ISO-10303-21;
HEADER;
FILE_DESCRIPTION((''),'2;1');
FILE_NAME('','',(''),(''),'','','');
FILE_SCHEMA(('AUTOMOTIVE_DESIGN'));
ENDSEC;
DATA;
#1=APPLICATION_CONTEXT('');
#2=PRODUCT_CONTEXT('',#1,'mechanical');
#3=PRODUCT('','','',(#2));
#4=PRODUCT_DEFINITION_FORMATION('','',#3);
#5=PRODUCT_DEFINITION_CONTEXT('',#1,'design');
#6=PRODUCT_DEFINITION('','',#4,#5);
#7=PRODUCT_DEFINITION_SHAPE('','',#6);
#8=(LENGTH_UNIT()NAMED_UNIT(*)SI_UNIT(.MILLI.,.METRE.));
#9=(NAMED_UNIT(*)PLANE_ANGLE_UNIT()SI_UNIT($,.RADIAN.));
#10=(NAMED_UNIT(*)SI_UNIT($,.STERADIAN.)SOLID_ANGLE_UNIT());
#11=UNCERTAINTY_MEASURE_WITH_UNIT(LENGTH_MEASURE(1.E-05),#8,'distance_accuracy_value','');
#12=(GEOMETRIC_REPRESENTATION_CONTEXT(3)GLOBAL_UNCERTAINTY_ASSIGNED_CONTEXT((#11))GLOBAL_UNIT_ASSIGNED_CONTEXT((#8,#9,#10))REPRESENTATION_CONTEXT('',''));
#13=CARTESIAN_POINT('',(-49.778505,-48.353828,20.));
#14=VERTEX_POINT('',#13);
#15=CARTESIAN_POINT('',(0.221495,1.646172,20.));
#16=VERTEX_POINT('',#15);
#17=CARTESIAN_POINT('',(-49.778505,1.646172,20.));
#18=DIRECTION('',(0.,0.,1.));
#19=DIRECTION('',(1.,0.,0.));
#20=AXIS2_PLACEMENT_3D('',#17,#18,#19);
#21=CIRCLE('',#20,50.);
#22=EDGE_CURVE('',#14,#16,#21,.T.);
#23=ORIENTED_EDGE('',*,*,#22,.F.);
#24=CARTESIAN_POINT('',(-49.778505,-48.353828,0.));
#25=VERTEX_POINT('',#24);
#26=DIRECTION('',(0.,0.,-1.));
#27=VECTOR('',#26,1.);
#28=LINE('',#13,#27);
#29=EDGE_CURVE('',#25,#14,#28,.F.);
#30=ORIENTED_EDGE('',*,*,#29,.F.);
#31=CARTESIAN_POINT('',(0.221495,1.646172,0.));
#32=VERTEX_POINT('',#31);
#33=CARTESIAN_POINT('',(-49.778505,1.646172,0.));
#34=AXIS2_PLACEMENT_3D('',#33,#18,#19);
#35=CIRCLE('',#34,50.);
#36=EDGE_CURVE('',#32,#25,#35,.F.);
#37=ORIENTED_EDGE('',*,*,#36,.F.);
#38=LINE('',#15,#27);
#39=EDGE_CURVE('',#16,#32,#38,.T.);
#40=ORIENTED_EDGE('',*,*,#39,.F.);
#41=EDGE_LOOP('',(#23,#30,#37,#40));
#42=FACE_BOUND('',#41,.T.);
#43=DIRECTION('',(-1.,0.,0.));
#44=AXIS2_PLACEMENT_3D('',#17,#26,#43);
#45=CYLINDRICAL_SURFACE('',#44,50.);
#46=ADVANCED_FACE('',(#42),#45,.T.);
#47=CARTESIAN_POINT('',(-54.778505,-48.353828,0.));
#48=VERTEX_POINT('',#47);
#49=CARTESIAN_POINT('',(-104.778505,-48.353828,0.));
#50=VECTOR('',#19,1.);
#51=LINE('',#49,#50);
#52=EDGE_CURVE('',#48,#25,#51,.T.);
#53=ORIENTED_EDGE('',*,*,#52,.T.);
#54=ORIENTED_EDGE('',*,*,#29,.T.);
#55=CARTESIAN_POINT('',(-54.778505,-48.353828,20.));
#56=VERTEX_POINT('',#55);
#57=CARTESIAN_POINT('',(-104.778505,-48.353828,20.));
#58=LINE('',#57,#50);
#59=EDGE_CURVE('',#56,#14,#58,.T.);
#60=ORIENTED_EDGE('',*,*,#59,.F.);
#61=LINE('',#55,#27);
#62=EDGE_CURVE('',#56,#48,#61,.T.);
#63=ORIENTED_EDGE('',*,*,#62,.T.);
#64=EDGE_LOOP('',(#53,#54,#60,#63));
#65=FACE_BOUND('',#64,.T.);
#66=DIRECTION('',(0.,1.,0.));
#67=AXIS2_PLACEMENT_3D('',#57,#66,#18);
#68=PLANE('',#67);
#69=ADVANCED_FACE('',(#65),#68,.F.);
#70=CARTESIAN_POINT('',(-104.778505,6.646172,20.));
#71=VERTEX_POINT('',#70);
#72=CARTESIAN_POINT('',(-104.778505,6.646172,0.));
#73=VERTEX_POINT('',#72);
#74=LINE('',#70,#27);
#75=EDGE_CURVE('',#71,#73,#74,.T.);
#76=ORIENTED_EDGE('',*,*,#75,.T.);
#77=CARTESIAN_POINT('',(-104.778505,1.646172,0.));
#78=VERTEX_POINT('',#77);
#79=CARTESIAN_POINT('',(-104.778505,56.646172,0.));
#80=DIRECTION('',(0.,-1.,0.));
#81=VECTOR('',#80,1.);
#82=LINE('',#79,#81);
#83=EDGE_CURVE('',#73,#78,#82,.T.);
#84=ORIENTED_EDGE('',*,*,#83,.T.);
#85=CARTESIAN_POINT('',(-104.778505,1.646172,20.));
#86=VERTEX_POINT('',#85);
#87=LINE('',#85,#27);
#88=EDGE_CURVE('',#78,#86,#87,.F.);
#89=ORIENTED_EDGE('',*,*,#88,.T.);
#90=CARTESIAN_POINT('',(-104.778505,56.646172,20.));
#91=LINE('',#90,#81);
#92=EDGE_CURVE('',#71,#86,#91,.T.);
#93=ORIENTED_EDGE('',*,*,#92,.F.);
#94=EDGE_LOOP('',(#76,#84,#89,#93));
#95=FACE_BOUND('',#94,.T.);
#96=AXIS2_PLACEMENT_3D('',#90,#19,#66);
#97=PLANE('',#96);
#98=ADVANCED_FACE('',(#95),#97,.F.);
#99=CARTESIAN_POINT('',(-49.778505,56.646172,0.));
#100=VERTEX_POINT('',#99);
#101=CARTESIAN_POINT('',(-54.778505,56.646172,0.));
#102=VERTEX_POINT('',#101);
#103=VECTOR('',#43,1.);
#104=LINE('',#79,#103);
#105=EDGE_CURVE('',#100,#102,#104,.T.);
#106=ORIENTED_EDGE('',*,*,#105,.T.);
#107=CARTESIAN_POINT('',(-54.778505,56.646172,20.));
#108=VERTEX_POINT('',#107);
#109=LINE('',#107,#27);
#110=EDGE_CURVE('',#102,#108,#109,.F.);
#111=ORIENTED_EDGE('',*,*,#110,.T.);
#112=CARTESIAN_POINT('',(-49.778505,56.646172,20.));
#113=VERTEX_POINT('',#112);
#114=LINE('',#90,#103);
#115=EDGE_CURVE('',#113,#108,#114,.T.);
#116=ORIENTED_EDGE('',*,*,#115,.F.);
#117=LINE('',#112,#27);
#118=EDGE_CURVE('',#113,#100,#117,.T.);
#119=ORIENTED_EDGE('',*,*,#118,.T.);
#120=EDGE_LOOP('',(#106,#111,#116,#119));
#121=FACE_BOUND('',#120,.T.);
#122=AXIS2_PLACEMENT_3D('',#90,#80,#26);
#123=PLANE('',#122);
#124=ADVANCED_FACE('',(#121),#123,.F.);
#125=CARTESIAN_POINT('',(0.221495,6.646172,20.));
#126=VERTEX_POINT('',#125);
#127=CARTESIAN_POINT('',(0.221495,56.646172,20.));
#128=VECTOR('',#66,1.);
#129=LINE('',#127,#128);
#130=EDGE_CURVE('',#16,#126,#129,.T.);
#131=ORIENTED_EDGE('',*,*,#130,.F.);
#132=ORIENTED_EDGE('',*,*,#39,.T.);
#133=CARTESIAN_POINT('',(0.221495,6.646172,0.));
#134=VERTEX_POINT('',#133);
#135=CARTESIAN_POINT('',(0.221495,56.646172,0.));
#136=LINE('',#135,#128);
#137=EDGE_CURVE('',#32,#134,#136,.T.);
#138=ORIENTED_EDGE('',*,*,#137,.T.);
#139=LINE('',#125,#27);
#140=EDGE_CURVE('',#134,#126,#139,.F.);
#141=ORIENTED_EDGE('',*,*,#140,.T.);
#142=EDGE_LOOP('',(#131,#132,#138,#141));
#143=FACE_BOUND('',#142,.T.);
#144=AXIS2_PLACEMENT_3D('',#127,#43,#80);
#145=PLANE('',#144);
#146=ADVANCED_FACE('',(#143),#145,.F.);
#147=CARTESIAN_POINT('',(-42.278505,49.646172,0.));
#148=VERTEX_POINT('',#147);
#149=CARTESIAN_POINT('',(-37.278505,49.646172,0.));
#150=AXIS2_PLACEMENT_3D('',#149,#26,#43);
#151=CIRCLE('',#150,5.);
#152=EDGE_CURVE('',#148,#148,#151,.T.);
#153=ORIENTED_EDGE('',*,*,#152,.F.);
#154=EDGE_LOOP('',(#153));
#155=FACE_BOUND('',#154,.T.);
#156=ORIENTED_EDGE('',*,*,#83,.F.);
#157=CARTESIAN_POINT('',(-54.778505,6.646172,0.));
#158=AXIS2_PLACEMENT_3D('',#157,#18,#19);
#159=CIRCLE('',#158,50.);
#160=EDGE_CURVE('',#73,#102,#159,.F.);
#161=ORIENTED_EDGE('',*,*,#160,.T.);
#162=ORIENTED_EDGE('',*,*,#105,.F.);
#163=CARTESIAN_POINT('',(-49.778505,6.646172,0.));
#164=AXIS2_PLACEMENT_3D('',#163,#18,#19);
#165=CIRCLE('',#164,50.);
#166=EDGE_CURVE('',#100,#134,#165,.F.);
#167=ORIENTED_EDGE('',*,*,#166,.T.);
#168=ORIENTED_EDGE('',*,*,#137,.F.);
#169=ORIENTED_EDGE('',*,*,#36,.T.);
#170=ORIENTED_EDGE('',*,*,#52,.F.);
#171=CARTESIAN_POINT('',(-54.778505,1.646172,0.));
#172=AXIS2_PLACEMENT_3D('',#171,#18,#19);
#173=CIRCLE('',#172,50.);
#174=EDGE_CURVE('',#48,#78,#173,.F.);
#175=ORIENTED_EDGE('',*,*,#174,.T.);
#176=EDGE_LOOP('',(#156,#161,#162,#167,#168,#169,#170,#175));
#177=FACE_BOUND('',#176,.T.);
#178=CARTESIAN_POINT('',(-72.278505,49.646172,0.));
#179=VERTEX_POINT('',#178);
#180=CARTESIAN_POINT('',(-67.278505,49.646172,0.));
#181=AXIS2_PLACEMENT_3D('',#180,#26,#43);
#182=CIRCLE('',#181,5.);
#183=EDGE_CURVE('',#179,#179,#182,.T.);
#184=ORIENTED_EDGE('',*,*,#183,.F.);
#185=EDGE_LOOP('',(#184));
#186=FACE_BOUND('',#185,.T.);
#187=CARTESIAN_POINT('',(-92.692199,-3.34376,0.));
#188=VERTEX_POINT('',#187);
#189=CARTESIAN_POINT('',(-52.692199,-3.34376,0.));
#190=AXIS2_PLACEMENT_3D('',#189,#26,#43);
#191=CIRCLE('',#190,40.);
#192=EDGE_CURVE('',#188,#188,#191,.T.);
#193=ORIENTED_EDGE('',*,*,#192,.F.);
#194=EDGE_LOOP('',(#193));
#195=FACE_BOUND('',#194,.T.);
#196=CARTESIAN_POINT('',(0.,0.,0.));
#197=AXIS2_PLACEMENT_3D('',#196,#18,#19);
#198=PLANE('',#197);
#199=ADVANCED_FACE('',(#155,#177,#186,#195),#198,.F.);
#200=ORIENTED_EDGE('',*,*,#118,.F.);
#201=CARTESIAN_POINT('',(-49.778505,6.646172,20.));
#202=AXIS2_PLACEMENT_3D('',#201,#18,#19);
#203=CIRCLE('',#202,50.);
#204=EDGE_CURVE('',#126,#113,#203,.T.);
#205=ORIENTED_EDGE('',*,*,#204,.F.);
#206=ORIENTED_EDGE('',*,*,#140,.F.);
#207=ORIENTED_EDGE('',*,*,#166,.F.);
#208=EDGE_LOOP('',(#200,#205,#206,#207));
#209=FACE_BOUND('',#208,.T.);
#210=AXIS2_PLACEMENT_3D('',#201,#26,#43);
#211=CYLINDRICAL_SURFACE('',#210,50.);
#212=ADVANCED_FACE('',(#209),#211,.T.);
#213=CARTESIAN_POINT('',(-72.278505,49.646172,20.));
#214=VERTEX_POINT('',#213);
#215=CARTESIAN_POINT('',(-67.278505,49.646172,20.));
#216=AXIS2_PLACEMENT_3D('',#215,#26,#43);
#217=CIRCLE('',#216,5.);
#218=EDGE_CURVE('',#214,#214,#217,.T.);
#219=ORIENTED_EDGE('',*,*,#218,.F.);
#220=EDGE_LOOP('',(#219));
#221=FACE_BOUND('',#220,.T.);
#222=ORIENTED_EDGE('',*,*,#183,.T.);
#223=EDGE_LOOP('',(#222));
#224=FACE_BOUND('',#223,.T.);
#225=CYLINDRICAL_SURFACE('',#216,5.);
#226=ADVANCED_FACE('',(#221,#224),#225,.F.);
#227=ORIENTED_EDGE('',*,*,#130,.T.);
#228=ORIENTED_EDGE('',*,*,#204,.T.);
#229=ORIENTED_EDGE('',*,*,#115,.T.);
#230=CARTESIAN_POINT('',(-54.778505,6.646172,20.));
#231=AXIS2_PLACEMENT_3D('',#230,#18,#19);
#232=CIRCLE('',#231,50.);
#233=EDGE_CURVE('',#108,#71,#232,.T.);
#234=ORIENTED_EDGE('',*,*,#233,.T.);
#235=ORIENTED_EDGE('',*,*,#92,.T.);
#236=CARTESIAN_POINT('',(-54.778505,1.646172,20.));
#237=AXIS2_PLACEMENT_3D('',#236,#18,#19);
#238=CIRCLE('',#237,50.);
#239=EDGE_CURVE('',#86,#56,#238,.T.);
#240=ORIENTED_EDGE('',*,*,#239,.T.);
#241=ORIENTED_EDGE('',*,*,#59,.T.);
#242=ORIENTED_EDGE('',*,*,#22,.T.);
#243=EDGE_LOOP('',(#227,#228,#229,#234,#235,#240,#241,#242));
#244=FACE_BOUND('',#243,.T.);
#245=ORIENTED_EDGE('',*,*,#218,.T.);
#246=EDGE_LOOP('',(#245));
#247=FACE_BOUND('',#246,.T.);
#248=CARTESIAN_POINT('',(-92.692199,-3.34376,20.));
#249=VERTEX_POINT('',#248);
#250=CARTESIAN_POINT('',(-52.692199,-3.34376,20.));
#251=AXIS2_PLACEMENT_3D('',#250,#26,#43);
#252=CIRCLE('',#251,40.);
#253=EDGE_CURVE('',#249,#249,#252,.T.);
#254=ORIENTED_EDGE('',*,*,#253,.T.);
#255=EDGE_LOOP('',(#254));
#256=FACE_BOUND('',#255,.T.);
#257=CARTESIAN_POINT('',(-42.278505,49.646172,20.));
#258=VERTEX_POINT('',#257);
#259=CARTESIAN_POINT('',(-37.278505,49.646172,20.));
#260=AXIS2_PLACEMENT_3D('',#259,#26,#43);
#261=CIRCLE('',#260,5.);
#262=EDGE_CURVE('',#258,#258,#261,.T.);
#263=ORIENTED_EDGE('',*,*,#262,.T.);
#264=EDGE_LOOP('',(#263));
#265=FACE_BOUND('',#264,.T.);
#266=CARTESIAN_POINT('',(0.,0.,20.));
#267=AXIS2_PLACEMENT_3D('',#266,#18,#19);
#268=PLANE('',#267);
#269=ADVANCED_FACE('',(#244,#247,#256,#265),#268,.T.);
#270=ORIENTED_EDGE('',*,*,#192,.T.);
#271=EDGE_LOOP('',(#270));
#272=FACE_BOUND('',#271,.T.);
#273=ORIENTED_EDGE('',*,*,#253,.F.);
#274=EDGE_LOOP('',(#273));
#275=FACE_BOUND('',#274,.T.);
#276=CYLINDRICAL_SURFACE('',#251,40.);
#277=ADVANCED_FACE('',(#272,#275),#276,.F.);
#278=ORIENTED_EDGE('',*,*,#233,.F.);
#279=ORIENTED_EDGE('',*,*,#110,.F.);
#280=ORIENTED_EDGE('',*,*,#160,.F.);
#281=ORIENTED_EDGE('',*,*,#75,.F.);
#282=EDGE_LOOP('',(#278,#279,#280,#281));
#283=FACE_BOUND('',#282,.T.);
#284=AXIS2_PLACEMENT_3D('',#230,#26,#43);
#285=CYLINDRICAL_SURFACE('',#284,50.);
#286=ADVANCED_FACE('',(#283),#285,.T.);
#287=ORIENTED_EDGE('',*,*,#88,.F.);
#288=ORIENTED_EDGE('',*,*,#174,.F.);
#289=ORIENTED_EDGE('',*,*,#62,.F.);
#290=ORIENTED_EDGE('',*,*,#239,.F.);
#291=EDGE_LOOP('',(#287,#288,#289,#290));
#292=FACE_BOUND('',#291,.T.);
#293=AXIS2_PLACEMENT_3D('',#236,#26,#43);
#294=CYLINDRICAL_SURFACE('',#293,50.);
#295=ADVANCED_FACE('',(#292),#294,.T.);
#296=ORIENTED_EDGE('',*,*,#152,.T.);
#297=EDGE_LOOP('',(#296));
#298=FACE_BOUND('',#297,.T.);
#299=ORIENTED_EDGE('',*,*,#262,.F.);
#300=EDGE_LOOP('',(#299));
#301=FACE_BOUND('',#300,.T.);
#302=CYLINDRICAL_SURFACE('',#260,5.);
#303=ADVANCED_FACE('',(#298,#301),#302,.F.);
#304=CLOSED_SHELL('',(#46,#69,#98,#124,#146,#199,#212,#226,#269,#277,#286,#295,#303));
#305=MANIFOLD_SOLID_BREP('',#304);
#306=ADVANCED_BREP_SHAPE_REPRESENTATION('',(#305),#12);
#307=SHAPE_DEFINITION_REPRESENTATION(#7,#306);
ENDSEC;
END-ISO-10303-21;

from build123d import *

# Parameters (mm, degrees)
SKETCH1_W           = 105
SKETCH1_H           = 105
BOSS_EXTRUDE1_DEPTH = 20
HOLE5_OUTLINE_R     = 40
HOLE5_DEPTH         = 20
SKETCH14_R          = 5
CUT_EXTRUDE2_DEPTH  = 20
LPATTERN2_COUNT     = 2
LPATTERN2_PITCH     = 30
FILLET3_R           = 50


# Read off the part's stored shape, not the designer's step: Hole5
with BuildPart() as part:
    # Sketch1 → Boss-Extrude1 (new body)
    with BuildSketch(Plane(origin=(-15.357562319, 50.523240315, 0), x_dir=(1, 0, 0), z_dir=(0, 0, 1))):
        with Locations((-36.920942408, -46.377068063)):
            Rectangle(SKETCH1_W, SKETCH1_H)
    extrude(amount=BOSS_EXTRUDE1_DEPTH)

    # Hole5 outline → Hole5 (cut)
    with BuildSketch(Plane.XY):
        with Locations((-52.692198598, -3.343760422)):
            Circle(HOLE5_OUTLINE_R)
    extrude(amount=HOLE5_DEPTH, mode=Mode.SUBTRACT)

    # Sketch14 → Cut-Extrude2 (cut)
    with BuildSketch(Plane(origin=(0, 0, 0), x_dir=(-1, 0, 0), z_dir=(0, 0, -1))):
        with Locations((37.278504727, 49.646172252)):
            Circle(SKETCH14_R)
    cut_extrude2 = extrude(amount=-CUT_EXTRUDE2_DEPTH, mode=Mode.SUBTRACT)

    # LPattern2: Cut-Extrude2 ×2
    with Locations(*[(-i * LPATTERN2_PITCH, 0, 0) for i in range(1, LPATTERN2_COUNT)]):
        add(cut_extrude2, mode=Mode.SUBTRACT)

    # Fillet3
    fillet3_edges = [part.edges().sort_by_distance(p)[0] for p in [
        (-104.778504727, 56.646172252, 10),
        (0.221495273, 56.646172252, 10),
        (0.221495273, -48.353827748, 10),
        (-104.778504727, -48.353827748, 10),
    ]]
    fillet(fillet3_edges, radius=FILLET3_R)


solid = part.part
